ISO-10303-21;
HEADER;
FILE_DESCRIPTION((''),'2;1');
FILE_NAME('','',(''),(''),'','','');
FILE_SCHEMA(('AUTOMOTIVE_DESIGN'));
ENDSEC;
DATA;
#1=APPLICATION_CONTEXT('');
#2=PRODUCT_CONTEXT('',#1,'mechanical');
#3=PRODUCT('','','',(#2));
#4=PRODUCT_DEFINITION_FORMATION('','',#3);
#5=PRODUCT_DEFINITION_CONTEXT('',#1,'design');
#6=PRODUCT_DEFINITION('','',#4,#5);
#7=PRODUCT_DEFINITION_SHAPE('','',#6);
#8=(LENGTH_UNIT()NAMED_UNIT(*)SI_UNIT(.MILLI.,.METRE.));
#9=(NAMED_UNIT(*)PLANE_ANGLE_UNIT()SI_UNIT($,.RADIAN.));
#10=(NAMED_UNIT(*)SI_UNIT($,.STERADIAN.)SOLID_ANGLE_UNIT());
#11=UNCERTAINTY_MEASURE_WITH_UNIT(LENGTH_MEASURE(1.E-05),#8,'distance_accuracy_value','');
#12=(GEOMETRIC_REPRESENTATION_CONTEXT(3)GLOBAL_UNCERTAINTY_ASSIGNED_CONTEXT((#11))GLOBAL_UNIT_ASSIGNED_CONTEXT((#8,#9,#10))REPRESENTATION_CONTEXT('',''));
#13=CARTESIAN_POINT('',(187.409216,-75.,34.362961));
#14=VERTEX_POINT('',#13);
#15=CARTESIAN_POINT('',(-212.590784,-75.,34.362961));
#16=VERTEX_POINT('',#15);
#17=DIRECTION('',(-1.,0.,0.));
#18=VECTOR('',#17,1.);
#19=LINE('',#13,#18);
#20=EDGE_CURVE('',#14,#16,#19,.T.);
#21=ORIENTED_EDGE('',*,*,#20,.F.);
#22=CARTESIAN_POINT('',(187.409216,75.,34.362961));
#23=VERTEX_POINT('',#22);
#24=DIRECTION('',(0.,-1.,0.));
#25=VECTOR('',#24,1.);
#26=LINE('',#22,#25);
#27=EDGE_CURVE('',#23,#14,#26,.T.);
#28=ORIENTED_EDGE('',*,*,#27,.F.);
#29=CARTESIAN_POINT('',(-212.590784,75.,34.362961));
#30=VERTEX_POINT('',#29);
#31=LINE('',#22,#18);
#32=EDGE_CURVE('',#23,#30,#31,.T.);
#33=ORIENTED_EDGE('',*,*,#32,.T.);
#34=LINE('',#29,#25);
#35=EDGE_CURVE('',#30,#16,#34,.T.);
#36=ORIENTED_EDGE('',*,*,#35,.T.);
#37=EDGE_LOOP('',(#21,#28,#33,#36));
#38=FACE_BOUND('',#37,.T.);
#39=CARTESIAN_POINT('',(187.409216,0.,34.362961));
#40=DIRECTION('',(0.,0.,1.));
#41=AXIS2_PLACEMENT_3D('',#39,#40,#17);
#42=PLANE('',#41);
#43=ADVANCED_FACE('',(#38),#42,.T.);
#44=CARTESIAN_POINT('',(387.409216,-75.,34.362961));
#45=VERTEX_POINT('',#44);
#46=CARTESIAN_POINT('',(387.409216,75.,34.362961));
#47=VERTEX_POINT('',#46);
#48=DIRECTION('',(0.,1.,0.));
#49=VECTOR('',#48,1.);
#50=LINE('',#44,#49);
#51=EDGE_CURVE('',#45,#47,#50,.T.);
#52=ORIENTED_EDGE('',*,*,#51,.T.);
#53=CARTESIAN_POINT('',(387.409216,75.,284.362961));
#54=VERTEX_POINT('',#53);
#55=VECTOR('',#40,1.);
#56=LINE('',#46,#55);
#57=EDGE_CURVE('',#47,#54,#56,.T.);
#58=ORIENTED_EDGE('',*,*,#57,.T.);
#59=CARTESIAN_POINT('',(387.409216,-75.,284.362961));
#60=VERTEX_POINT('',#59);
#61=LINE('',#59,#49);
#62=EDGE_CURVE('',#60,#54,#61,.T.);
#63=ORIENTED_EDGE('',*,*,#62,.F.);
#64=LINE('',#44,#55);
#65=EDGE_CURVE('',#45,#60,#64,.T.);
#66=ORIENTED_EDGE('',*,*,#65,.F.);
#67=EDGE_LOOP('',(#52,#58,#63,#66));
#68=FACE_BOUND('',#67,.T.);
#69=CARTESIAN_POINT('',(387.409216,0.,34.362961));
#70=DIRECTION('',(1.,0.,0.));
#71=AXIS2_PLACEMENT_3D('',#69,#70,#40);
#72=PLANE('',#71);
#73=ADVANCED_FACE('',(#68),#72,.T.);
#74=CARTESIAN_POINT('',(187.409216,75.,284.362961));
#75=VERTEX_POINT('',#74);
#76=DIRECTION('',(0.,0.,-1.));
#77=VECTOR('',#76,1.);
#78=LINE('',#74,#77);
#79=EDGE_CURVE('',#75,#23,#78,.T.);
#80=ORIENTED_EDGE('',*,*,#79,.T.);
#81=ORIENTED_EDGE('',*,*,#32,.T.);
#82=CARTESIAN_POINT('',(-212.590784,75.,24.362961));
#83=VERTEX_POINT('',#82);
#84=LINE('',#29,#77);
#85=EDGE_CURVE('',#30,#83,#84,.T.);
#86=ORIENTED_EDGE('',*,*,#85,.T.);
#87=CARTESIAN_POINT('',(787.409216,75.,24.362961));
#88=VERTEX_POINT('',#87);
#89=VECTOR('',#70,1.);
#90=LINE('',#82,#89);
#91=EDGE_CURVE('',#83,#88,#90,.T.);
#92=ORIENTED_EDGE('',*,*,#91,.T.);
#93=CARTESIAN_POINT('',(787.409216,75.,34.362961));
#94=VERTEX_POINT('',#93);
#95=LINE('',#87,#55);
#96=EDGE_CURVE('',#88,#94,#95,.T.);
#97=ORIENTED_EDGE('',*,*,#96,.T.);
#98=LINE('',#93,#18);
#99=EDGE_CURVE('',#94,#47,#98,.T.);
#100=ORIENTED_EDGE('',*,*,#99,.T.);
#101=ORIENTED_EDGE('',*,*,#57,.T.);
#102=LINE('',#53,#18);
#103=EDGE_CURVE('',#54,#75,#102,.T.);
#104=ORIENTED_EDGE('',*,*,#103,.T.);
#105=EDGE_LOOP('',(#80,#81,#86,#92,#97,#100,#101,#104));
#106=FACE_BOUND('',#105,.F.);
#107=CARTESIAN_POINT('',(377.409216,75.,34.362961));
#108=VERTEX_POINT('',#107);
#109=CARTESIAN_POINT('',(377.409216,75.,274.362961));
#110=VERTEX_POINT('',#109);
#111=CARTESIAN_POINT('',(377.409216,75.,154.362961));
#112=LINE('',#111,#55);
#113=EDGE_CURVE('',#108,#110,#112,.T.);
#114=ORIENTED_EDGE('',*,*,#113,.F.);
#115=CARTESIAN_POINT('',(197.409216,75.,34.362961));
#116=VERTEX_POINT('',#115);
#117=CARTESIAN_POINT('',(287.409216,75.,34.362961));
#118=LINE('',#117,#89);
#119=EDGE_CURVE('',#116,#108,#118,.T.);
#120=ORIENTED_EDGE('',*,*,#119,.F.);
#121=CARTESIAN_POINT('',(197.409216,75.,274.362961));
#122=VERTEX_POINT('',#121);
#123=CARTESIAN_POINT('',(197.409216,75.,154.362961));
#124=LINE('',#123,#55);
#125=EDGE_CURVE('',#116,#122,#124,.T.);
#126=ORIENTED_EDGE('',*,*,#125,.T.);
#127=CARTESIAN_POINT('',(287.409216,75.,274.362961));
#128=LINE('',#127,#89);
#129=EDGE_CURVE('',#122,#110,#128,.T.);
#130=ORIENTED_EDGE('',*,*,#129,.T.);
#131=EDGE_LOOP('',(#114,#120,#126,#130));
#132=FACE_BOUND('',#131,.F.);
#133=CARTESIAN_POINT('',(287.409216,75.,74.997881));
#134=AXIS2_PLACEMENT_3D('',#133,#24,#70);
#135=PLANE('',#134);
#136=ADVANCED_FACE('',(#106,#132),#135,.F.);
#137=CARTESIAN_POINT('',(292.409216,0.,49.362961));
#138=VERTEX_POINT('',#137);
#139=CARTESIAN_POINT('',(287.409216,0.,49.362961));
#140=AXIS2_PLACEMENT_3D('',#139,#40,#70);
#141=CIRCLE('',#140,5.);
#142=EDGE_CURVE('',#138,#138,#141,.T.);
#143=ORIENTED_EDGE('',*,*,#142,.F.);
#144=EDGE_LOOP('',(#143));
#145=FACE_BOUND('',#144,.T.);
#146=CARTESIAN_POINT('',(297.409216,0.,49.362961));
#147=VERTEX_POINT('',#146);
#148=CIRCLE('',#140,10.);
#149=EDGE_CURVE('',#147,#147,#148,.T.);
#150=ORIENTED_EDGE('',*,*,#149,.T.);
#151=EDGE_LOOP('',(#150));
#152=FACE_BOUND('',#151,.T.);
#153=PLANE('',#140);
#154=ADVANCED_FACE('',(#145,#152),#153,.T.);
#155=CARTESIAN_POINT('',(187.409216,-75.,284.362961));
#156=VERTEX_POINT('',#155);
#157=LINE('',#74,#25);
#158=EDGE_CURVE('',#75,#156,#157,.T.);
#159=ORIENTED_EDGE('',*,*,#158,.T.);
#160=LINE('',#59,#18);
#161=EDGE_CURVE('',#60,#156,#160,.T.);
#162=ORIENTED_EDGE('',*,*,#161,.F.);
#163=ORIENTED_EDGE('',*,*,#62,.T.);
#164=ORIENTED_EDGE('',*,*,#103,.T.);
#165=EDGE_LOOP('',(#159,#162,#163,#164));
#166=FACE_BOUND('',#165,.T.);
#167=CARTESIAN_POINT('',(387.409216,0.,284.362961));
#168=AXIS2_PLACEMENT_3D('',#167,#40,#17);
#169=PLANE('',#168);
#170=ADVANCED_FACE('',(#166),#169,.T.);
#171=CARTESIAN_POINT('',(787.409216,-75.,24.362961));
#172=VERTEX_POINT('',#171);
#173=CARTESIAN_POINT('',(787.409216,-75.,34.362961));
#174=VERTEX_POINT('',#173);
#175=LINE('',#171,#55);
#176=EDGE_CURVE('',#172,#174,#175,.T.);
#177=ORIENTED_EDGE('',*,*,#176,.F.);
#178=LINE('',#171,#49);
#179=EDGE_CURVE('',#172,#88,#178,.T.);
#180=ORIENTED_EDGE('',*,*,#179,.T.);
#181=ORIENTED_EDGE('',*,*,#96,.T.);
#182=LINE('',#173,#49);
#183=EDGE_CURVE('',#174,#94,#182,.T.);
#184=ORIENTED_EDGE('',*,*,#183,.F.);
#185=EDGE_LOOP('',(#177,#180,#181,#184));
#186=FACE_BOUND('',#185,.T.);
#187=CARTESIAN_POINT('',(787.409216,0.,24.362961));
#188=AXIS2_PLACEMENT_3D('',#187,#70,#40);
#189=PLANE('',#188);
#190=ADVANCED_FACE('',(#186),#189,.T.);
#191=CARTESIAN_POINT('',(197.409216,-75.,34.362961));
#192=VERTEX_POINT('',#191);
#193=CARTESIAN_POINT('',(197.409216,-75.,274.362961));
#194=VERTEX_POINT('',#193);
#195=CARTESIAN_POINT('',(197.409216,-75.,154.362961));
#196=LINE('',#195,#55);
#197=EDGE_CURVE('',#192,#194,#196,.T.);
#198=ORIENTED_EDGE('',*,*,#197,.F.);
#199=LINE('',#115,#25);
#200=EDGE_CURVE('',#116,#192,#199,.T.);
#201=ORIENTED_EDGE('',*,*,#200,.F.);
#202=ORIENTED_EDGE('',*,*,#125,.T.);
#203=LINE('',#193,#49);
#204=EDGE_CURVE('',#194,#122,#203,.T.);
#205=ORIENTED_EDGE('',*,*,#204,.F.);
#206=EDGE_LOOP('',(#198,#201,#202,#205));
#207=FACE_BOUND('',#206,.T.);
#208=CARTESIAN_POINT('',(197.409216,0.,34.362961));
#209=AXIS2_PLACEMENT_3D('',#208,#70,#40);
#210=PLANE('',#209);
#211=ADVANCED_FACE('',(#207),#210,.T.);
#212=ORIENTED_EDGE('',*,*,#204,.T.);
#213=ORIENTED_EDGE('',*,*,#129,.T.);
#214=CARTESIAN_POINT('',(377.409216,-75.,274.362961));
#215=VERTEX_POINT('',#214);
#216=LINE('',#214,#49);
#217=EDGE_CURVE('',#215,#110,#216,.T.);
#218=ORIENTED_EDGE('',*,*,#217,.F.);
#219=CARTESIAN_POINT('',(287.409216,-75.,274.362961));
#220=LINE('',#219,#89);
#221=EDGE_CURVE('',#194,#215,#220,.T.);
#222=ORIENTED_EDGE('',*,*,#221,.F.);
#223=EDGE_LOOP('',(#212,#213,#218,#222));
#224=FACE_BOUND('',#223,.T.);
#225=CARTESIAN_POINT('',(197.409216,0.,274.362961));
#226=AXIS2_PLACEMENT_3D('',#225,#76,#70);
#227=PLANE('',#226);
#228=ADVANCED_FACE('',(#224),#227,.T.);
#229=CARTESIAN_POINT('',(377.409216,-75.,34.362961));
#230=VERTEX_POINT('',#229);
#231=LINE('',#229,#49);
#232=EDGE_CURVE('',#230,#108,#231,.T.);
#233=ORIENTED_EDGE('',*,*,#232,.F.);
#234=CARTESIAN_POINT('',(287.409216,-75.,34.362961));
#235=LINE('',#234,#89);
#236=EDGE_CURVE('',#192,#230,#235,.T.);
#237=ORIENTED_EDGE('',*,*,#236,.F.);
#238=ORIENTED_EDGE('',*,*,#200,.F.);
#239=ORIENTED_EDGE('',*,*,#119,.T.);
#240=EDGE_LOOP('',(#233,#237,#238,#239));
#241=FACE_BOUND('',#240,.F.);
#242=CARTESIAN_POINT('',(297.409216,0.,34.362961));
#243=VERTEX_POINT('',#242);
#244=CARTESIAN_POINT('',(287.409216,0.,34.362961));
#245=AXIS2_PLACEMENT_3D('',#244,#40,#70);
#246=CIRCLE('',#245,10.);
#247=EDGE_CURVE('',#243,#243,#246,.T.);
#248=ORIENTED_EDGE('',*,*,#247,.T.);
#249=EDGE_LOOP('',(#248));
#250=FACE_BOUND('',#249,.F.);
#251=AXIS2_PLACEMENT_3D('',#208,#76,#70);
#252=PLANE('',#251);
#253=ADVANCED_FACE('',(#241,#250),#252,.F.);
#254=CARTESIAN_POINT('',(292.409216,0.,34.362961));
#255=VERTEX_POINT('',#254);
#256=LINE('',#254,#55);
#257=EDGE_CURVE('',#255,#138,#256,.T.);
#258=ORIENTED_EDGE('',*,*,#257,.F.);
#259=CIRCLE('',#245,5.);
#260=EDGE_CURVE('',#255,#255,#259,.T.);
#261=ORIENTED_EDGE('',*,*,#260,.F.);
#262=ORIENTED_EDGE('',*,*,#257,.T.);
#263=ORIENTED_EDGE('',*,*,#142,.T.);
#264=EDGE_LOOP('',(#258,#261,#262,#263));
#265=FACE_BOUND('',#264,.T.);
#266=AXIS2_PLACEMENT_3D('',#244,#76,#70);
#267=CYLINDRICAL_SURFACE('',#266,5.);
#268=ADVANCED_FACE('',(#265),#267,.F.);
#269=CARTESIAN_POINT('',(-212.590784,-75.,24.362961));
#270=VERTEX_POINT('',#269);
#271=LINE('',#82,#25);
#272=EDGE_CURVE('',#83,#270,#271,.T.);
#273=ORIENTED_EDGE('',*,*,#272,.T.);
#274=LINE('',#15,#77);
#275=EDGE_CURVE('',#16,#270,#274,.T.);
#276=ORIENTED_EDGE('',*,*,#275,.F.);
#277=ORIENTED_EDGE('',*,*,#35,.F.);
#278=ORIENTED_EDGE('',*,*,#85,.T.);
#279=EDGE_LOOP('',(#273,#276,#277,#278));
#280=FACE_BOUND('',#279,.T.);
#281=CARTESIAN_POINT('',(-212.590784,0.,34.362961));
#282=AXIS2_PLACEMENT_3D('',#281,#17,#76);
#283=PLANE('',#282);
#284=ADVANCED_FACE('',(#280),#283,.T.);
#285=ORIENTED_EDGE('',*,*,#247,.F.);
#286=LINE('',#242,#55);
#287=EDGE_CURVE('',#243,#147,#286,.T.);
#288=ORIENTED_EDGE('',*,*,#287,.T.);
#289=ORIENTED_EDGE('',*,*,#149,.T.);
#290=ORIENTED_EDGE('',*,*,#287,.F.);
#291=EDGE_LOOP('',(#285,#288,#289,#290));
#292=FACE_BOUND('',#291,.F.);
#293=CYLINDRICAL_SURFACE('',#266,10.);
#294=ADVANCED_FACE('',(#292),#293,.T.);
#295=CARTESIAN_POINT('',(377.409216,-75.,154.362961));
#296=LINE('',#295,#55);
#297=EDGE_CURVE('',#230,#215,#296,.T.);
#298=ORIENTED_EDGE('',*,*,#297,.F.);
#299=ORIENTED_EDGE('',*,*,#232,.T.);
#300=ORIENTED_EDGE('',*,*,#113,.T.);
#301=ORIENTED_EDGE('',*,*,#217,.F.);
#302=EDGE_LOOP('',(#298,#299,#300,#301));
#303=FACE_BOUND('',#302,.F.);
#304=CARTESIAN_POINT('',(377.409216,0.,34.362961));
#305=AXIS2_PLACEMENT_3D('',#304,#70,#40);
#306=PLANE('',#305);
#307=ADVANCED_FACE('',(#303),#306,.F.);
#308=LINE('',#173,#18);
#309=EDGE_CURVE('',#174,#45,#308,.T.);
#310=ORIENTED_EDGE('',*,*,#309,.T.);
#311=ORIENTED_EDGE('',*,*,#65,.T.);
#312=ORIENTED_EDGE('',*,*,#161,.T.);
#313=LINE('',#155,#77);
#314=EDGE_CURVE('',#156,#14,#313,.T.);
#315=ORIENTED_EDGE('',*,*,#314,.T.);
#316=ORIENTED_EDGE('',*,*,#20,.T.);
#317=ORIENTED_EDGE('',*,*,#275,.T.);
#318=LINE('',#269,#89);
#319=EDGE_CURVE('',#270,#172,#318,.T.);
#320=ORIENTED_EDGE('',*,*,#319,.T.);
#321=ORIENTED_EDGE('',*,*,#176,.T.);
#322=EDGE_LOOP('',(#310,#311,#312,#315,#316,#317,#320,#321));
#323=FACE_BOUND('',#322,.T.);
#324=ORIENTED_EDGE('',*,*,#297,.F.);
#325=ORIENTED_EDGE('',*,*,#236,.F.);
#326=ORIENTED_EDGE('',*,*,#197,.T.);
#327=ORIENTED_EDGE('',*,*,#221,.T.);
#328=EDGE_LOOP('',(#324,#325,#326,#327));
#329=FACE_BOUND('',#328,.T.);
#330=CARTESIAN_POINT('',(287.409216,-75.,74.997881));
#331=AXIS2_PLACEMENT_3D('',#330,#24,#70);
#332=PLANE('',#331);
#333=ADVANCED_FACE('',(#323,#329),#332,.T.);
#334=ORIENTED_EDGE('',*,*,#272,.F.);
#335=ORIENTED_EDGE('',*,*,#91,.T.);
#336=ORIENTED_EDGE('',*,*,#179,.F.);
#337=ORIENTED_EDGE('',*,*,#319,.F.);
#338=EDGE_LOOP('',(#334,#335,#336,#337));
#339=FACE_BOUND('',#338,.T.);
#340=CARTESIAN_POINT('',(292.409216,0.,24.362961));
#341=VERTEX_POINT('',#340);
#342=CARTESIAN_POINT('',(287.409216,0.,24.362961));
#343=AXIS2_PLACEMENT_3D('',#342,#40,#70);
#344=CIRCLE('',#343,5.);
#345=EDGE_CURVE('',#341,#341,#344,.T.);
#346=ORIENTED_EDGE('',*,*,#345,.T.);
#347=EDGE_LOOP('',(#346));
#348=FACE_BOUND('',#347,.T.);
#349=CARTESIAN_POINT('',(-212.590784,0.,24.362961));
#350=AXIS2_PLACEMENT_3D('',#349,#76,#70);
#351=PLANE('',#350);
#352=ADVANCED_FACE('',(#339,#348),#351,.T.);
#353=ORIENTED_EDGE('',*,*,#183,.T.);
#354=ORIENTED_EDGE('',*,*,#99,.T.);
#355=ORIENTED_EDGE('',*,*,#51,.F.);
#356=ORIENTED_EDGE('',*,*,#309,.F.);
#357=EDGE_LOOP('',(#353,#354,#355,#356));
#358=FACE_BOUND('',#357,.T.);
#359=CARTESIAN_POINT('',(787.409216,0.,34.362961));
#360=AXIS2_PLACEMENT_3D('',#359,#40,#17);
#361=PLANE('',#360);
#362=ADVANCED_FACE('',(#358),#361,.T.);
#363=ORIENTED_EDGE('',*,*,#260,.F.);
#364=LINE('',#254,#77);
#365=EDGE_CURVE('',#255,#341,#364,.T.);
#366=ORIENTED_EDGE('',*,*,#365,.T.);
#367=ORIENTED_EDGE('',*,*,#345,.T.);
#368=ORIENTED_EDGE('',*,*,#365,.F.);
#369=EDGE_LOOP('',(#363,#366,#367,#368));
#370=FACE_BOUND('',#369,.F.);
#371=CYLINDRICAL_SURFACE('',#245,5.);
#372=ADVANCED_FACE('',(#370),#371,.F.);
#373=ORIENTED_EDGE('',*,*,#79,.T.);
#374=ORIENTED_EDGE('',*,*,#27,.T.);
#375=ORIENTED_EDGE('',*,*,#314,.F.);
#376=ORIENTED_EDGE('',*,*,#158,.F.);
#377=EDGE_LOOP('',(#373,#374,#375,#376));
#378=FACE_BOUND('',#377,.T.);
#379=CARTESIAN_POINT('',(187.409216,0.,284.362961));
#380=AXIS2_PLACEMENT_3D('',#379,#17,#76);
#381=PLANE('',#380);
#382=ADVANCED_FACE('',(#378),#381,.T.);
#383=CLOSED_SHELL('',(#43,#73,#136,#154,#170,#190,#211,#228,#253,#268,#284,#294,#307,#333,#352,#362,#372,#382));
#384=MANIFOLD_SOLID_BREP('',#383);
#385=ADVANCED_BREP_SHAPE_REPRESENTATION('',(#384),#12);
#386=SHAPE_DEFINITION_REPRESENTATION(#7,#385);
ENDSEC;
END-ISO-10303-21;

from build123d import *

# Parameters (mm, degrees)
F0_W     = 180
F0_H     = 240
F1_DEPTH = 75
F3_D     = 10
F3_DEPTH = 600
F3_TIP   = 3.0043030951
F2_R     = 10
F2_R_2   = 5
F4_DEPTH = 15


with BuildPart() as f1:
    # F0 (on Front) → F1 (new body, symmetric)
    with BuildSketch(Plane.XZ):
        Polygon((387.4092161655, 284.3629608303), (187.4092161655, 284.3629608303), (187.4092161655, 34.3629608303), (-212.5907838345, 34.3629608303), (-212.5907838345, 24.3629608303), (787.4092161655, 24.3629608303), (787.4092161655, 34.3629608303), (387.4092161655, 34.3629608303), align=None)
        with Locations((287.4092161655, 154.3629608303)):
            Rectangle(F0_W, F0_H, mode=Mode.SUBTRACT)
    extrude(amount=F1_DEPTH, both=True)

    # F3 (one way)
    with BuildSketch(Plane.XY.offset(34.3629608303)):
        with Locations((287.4092161655, 0)):
            Circle(F3_D / 2)
    extrude(amount=-F3_DEPTH, mode=Mode.SUBTRACT)
    with Locations(Plane.XY.offset(34.3629608303)):
        with Locations((287.4092161655, 0)):
            with Locations((0, 0, -(F3_DEPTH + F3_TIP / 2))):  # 118° drill point
                Cone(0, F3_D / 2, F3_TIP, mode=Mode.SUBTRACT)

    # F2 (on face) → F4 (join)
    with BuildSketch(Plane.XY.offset(34.3629608303)):
        with Locations((287.4092161655, 0)):
            Circle(F2_R)
        with Locations((287.4092161655, 0)):
            Circle(F2_R_2, mode=Mode.SUBTRACT)
    extrude(amount=F4_DEPTH)


solid = f1.part
